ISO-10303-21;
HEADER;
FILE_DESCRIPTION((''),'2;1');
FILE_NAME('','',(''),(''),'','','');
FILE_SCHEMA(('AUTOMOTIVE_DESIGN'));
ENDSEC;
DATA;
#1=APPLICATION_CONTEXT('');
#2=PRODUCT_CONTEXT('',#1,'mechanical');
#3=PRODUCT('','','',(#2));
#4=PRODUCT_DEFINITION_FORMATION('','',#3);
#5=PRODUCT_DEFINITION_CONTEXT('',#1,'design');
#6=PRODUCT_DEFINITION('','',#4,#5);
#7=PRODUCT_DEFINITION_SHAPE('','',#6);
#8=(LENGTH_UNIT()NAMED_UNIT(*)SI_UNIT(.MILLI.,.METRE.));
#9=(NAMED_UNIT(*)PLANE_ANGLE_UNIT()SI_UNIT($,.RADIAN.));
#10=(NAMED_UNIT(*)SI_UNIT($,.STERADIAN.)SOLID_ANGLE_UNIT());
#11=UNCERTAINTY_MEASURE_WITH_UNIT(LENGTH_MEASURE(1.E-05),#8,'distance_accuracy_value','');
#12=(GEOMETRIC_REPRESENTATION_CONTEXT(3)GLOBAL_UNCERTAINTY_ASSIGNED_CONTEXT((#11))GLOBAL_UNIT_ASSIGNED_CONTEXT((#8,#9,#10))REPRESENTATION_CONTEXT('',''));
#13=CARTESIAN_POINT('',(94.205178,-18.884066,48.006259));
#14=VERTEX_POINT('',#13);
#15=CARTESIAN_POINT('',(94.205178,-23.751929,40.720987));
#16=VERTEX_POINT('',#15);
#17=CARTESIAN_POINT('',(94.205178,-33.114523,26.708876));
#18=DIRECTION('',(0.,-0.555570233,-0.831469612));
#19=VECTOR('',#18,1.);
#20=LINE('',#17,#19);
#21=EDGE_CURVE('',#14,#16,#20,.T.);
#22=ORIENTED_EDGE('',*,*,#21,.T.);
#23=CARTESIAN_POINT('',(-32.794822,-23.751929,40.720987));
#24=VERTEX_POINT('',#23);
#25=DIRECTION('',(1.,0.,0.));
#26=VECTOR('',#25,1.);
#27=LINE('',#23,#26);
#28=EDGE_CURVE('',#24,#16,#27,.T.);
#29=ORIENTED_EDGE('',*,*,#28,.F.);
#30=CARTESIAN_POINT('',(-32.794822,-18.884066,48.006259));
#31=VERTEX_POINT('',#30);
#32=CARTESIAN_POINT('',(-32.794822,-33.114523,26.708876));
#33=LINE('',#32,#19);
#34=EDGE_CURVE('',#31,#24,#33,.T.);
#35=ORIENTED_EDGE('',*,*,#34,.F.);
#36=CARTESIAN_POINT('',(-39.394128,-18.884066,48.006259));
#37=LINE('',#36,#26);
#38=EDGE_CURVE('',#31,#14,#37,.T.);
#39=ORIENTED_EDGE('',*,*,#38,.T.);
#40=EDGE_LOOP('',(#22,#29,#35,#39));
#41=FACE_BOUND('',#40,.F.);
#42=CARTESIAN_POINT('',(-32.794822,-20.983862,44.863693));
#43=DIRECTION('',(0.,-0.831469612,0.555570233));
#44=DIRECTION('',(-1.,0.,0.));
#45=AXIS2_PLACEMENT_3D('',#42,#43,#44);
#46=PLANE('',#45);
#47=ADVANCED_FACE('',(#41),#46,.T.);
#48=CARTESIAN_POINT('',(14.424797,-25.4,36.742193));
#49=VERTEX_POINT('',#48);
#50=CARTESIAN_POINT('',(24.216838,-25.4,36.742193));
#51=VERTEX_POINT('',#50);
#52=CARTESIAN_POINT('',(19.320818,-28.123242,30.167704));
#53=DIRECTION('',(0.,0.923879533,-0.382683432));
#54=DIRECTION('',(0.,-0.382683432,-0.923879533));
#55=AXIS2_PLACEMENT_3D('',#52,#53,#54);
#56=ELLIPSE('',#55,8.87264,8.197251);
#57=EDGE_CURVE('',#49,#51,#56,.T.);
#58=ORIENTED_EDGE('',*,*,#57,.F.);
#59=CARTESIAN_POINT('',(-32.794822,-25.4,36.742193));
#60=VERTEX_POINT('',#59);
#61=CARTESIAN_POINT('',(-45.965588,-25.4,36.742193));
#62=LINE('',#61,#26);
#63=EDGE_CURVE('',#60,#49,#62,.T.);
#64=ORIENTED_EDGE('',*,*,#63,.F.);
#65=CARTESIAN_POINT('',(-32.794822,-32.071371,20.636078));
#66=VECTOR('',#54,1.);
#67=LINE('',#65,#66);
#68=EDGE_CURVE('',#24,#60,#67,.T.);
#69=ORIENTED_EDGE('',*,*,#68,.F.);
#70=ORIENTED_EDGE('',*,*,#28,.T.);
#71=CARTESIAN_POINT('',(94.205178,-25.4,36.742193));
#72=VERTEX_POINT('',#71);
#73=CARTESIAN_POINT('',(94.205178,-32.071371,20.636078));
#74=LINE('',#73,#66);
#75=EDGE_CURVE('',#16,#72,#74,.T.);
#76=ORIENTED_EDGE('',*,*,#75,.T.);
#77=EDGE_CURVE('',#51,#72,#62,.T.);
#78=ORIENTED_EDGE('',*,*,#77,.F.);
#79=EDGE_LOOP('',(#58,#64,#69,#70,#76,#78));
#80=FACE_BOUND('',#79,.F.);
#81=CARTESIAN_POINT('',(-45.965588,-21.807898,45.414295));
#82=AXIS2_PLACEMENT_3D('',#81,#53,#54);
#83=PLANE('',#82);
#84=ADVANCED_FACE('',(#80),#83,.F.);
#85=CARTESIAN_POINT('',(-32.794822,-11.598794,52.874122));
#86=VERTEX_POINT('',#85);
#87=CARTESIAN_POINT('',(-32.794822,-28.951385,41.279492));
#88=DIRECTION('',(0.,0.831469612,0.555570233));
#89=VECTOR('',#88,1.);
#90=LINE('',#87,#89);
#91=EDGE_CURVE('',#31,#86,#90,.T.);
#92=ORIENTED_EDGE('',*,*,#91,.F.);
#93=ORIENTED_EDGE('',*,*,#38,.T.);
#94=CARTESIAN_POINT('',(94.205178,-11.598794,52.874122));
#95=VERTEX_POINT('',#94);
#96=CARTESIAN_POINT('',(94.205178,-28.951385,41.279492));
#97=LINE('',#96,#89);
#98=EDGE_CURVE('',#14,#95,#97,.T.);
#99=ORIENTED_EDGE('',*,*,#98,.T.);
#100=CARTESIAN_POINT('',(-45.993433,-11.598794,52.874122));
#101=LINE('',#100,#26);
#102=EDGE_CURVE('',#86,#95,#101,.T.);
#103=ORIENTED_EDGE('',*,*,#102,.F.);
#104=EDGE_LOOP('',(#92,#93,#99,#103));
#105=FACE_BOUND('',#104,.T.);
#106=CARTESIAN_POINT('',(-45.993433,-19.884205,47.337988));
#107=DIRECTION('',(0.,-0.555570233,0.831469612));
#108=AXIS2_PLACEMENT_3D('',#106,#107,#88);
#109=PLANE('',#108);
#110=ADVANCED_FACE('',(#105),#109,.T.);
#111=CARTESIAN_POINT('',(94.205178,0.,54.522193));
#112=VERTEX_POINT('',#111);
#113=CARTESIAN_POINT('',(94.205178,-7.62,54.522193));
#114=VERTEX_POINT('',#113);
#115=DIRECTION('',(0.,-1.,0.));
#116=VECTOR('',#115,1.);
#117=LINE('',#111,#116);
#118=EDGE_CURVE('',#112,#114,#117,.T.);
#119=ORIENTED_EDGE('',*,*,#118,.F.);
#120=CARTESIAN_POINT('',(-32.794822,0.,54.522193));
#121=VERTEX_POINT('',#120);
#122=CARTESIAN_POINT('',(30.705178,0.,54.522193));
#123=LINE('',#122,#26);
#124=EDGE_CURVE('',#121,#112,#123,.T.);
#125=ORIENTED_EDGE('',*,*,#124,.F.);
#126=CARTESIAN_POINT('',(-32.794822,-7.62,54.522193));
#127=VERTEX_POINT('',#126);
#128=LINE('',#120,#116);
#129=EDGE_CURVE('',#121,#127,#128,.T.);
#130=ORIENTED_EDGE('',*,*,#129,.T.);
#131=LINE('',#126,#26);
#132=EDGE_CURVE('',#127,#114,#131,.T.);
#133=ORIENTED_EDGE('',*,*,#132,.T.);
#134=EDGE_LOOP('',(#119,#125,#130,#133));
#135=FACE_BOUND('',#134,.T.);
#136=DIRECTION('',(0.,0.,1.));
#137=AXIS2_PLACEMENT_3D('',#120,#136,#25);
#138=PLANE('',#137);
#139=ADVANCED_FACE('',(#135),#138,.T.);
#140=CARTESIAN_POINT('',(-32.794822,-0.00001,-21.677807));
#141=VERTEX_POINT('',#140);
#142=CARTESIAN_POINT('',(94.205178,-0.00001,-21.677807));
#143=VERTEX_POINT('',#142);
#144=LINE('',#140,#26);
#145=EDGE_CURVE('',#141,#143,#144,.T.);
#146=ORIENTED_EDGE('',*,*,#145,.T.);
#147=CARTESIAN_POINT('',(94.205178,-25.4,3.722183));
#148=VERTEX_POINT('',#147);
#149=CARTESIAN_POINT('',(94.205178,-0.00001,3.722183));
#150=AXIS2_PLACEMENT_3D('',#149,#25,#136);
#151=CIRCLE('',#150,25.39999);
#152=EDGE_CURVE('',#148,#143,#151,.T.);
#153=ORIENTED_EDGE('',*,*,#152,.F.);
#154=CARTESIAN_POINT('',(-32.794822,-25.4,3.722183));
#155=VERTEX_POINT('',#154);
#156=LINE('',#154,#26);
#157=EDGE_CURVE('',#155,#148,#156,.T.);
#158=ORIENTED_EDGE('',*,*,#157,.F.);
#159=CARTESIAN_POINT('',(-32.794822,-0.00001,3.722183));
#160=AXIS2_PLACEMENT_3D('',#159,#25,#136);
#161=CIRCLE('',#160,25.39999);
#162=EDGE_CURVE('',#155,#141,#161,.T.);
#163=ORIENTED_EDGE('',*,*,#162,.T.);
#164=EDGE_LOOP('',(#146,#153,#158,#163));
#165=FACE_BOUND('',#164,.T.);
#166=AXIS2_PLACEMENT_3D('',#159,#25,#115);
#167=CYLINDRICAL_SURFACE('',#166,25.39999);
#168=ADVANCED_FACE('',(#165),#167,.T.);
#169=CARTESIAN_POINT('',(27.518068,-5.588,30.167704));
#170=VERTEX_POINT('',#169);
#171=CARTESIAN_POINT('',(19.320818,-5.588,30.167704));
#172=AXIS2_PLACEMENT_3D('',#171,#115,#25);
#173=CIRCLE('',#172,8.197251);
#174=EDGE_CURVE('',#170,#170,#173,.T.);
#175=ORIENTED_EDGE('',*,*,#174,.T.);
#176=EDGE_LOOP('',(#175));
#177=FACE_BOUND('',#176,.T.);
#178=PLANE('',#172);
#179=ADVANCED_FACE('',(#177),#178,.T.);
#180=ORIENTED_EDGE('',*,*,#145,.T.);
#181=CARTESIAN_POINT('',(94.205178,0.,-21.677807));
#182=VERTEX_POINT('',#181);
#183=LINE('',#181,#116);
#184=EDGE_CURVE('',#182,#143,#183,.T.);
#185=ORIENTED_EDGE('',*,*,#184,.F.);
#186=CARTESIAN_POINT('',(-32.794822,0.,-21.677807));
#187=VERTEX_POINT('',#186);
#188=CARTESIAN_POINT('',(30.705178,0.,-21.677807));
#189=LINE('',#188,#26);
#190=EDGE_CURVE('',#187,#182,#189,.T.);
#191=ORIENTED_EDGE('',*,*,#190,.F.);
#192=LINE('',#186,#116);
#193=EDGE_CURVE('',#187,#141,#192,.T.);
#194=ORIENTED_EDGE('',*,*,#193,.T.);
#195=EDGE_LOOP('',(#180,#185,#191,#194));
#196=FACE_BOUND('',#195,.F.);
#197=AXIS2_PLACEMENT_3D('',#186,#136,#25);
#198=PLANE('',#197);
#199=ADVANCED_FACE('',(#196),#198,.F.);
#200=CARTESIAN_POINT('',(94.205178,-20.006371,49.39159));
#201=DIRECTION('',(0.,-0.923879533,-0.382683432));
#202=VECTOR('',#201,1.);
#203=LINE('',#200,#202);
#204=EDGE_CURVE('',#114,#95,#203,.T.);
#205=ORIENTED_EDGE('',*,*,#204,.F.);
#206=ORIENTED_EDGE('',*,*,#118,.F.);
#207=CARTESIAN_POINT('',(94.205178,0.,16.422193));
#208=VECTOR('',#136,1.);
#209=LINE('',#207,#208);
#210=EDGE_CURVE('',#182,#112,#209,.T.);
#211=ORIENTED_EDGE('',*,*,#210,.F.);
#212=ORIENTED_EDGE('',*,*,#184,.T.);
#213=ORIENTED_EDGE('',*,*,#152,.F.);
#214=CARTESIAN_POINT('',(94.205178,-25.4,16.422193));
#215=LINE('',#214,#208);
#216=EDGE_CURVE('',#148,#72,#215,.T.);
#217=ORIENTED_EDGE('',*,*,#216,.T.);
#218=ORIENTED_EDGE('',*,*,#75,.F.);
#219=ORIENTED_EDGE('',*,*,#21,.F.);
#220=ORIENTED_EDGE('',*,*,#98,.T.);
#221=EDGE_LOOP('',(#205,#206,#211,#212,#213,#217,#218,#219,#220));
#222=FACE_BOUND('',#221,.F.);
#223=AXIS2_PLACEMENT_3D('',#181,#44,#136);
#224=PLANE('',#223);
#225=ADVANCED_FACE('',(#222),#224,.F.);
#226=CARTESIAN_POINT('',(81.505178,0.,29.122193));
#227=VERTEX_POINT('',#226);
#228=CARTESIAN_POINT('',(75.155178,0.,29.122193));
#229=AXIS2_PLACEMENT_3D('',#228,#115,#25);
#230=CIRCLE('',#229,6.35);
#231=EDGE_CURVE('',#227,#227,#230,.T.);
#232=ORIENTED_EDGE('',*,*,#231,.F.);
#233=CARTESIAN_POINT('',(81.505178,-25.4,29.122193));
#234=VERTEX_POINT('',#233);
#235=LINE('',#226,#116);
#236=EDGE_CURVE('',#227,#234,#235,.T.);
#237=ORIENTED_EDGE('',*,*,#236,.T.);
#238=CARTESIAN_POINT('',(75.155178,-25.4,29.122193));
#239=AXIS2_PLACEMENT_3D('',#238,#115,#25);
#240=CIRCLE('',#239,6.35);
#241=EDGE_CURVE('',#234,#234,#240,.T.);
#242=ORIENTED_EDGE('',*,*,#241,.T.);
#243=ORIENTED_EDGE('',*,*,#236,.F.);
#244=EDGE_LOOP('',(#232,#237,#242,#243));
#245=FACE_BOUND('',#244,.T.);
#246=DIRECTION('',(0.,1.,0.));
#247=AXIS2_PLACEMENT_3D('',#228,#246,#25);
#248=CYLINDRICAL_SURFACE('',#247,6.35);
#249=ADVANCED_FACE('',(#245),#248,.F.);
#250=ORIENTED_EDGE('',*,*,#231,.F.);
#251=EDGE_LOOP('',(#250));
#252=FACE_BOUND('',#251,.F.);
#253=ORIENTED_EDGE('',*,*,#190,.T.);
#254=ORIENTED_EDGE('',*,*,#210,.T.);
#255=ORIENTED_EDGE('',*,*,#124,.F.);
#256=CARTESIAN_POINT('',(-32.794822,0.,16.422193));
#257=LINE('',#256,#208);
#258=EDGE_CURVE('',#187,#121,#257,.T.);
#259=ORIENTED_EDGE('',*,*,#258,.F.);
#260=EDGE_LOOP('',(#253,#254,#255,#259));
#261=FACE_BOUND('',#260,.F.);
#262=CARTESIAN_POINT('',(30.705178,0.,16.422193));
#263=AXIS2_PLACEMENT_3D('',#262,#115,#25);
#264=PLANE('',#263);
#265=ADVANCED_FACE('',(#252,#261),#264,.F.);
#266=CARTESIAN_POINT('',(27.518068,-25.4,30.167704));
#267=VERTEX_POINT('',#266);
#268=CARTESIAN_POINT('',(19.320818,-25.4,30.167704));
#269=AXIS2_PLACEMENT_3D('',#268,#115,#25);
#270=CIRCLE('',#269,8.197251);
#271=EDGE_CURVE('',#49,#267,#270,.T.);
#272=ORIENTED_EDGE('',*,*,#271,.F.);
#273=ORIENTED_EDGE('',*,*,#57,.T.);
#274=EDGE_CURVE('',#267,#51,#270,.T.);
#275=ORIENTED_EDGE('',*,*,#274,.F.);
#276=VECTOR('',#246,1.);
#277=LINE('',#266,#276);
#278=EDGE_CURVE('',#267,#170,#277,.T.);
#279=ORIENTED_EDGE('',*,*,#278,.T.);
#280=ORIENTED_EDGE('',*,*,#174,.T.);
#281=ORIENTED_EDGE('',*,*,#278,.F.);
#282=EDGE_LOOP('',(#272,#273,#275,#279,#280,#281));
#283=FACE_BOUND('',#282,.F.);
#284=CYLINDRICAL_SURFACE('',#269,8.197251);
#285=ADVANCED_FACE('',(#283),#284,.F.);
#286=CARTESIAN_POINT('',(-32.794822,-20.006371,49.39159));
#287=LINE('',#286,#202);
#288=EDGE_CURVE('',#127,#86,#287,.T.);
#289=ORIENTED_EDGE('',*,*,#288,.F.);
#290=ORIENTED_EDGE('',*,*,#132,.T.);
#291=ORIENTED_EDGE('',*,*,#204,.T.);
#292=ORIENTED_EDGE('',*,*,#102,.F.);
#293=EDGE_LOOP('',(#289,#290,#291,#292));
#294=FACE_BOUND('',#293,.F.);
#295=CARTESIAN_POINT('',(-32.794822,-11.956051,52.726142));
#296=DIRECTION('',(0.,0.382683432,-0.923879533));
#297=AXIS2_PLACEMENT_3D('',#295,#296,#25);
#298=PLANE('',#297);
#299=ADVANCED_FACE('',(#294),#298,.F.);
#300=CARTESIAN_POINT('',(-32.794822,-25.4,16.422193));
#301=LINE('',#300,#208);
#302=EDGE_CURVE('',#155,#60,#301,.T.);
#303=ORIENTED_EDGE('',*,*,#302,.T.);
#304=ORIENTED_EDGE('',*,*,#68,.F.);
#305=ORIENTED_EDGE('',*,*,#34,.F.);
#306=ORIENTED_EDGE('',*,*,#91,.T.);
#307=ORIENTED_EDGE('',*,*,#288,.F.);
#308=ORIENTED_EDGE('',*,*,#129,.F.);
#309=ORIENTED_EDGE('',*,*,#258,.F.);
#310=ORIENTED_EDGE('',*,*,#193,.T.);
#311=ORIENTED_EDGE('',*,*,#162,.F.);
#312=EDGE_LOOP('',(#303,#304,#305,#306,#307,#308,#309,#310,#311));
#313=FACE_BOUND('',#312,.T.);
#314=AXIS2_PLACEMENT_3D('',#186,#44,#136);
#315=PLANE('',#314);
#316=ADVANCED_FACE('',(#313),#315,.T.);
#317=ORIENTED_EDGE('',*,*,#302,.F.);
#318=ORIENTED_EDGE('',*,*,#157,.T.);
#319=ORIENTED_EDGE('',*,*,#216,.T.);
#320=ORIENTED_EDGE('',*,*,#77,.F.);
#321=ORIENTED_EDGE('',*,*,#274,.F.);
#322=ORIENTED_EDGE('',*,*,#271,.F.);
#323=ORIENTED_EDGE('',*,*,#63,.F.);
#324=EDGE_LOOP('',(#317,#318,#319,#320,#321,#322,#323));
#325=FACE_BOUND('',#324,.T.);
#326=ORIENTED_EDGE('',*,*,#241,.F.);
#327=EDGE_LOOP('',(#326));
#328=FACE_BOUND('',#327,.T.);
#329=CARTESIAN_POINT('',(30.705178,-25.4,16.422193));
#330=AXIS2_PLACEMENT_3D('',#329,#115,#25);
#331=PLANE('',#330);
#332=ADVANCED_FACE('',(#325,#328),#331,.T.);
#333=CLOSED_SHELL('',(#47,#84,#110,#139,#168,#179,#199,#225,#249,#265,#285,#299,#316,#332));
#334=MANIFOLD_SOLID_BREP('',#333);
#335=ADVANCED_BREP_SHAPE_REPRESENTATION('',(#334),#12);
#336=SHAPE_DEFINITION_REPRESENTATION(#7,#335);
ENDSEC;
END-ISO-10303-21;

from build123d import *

# Parameters (mm, degrees)
F0_W        = 127
F0_H        = 76.2
F0_R        = 6.35
F1_DEPTH    = 25.4
F2_R        = 8.1972505448
F3_DEPTH    = 19.812
F4_SIZE     = 12.7
F5_SIZE     = 5.08
F6_T1_DEPTH = 153.3415311919
F7_SIZE     = 5.08
F8_T1_DEPTH = 153.3972220228
F9_R        = 25.39999


# Not quite as in the source:
# - a fillet or chamfer that OpenCascade refuses, or shapes differently, is made with other operations: its cross-section is extruded or revolved along the edge and cut away or added
# - a fillet or chamfer is up to 0.001 mm smaller than in the source, because OpenCascade refuses the exact size


with BuildPart() as f1:
    # F0 (on Front) → F1 (new body)
    with BuildSketch(Plane.XZ):
        with Locations((30.7051779926, 16.4221930265)):
            Rectangle(F0_W, F0_H)
        with Locations((75.1551779926, 29.1221930265)):
            Circle(F0_R, mode=Mode.SUBTRACT)
    extrude(amount=F1_DEPTH)

    # F2 (on face) → F3 (cut)
    with BuildSketch(Plane.XZ.offset(25.4)):
        with Locations((19.3208176643, 30.1677044481)):
            Circle(F2_R)
    extrude(amount=-F3_DEPTH, mode=Mode.SUBTRACT)

    # F4
    f4_edges = [f1.edges().sort_by_distance(p)[0] for p in [
        (30.705178, -25.4, 54.522193),
    ]]
    chamfer(f4_edges, length=F4_SIZE)

    # F5
    f5_edges = [f1.edges().sort_by_distance(p)[0] for p in [
        (30.705178, -12.7, 54.522193),
    ]]
    chamfer(f5_edges, length=F5_SIZE)

    # F6: chamfer of 5.08 on 1 edges, made by hand

    # F6_s2 → F6_t1 (cut)
    with BuildSketch(Plane.YZ.offset(-45.9655876034)):
        Polygon((-21.8078975516, 45.414295475), (-25.4, 36.7421930265), (-25.4, 41.8221930265), align=None)
    extrude(amount=F6_T1_DEPTH, mode=Mode.SUBTRACT)

    # F7
    f7_edges = [f1.edges().sort_by_distance(p)[0] for p in [
        (30.705178, -21.807898, 45.414295),
    ]]
    chamfer(f7_edges, length=F7_SIZE)

    # F8: chamfer of 5.08 on 1 edges, made by hand

    # F8_s2 → F8_t1 (cut)
    with BuildSketch(Plane.YZ.offset(-45.9934330188)):
        Polygon((-19.8842048969, 47.3379881297), (-11.5987944233, 52.8741224145), (-16.2921024484, 50.9300905781), align=None)
    extrude(amount=F8_T1_DEPTH, mode=Mode.SUBTRACT)

    # F9 (radius 25.4 in the source; OpenCascade refuses exactly that, so slightly less here)
    f9_edges = [f1.edges().sort_by_distance(p)[0] for p in [
        (30.705178, -25.4, -21.677807),
    ]]
    fillet(f9_edges, radius=F9_R)


solid = f1.part
